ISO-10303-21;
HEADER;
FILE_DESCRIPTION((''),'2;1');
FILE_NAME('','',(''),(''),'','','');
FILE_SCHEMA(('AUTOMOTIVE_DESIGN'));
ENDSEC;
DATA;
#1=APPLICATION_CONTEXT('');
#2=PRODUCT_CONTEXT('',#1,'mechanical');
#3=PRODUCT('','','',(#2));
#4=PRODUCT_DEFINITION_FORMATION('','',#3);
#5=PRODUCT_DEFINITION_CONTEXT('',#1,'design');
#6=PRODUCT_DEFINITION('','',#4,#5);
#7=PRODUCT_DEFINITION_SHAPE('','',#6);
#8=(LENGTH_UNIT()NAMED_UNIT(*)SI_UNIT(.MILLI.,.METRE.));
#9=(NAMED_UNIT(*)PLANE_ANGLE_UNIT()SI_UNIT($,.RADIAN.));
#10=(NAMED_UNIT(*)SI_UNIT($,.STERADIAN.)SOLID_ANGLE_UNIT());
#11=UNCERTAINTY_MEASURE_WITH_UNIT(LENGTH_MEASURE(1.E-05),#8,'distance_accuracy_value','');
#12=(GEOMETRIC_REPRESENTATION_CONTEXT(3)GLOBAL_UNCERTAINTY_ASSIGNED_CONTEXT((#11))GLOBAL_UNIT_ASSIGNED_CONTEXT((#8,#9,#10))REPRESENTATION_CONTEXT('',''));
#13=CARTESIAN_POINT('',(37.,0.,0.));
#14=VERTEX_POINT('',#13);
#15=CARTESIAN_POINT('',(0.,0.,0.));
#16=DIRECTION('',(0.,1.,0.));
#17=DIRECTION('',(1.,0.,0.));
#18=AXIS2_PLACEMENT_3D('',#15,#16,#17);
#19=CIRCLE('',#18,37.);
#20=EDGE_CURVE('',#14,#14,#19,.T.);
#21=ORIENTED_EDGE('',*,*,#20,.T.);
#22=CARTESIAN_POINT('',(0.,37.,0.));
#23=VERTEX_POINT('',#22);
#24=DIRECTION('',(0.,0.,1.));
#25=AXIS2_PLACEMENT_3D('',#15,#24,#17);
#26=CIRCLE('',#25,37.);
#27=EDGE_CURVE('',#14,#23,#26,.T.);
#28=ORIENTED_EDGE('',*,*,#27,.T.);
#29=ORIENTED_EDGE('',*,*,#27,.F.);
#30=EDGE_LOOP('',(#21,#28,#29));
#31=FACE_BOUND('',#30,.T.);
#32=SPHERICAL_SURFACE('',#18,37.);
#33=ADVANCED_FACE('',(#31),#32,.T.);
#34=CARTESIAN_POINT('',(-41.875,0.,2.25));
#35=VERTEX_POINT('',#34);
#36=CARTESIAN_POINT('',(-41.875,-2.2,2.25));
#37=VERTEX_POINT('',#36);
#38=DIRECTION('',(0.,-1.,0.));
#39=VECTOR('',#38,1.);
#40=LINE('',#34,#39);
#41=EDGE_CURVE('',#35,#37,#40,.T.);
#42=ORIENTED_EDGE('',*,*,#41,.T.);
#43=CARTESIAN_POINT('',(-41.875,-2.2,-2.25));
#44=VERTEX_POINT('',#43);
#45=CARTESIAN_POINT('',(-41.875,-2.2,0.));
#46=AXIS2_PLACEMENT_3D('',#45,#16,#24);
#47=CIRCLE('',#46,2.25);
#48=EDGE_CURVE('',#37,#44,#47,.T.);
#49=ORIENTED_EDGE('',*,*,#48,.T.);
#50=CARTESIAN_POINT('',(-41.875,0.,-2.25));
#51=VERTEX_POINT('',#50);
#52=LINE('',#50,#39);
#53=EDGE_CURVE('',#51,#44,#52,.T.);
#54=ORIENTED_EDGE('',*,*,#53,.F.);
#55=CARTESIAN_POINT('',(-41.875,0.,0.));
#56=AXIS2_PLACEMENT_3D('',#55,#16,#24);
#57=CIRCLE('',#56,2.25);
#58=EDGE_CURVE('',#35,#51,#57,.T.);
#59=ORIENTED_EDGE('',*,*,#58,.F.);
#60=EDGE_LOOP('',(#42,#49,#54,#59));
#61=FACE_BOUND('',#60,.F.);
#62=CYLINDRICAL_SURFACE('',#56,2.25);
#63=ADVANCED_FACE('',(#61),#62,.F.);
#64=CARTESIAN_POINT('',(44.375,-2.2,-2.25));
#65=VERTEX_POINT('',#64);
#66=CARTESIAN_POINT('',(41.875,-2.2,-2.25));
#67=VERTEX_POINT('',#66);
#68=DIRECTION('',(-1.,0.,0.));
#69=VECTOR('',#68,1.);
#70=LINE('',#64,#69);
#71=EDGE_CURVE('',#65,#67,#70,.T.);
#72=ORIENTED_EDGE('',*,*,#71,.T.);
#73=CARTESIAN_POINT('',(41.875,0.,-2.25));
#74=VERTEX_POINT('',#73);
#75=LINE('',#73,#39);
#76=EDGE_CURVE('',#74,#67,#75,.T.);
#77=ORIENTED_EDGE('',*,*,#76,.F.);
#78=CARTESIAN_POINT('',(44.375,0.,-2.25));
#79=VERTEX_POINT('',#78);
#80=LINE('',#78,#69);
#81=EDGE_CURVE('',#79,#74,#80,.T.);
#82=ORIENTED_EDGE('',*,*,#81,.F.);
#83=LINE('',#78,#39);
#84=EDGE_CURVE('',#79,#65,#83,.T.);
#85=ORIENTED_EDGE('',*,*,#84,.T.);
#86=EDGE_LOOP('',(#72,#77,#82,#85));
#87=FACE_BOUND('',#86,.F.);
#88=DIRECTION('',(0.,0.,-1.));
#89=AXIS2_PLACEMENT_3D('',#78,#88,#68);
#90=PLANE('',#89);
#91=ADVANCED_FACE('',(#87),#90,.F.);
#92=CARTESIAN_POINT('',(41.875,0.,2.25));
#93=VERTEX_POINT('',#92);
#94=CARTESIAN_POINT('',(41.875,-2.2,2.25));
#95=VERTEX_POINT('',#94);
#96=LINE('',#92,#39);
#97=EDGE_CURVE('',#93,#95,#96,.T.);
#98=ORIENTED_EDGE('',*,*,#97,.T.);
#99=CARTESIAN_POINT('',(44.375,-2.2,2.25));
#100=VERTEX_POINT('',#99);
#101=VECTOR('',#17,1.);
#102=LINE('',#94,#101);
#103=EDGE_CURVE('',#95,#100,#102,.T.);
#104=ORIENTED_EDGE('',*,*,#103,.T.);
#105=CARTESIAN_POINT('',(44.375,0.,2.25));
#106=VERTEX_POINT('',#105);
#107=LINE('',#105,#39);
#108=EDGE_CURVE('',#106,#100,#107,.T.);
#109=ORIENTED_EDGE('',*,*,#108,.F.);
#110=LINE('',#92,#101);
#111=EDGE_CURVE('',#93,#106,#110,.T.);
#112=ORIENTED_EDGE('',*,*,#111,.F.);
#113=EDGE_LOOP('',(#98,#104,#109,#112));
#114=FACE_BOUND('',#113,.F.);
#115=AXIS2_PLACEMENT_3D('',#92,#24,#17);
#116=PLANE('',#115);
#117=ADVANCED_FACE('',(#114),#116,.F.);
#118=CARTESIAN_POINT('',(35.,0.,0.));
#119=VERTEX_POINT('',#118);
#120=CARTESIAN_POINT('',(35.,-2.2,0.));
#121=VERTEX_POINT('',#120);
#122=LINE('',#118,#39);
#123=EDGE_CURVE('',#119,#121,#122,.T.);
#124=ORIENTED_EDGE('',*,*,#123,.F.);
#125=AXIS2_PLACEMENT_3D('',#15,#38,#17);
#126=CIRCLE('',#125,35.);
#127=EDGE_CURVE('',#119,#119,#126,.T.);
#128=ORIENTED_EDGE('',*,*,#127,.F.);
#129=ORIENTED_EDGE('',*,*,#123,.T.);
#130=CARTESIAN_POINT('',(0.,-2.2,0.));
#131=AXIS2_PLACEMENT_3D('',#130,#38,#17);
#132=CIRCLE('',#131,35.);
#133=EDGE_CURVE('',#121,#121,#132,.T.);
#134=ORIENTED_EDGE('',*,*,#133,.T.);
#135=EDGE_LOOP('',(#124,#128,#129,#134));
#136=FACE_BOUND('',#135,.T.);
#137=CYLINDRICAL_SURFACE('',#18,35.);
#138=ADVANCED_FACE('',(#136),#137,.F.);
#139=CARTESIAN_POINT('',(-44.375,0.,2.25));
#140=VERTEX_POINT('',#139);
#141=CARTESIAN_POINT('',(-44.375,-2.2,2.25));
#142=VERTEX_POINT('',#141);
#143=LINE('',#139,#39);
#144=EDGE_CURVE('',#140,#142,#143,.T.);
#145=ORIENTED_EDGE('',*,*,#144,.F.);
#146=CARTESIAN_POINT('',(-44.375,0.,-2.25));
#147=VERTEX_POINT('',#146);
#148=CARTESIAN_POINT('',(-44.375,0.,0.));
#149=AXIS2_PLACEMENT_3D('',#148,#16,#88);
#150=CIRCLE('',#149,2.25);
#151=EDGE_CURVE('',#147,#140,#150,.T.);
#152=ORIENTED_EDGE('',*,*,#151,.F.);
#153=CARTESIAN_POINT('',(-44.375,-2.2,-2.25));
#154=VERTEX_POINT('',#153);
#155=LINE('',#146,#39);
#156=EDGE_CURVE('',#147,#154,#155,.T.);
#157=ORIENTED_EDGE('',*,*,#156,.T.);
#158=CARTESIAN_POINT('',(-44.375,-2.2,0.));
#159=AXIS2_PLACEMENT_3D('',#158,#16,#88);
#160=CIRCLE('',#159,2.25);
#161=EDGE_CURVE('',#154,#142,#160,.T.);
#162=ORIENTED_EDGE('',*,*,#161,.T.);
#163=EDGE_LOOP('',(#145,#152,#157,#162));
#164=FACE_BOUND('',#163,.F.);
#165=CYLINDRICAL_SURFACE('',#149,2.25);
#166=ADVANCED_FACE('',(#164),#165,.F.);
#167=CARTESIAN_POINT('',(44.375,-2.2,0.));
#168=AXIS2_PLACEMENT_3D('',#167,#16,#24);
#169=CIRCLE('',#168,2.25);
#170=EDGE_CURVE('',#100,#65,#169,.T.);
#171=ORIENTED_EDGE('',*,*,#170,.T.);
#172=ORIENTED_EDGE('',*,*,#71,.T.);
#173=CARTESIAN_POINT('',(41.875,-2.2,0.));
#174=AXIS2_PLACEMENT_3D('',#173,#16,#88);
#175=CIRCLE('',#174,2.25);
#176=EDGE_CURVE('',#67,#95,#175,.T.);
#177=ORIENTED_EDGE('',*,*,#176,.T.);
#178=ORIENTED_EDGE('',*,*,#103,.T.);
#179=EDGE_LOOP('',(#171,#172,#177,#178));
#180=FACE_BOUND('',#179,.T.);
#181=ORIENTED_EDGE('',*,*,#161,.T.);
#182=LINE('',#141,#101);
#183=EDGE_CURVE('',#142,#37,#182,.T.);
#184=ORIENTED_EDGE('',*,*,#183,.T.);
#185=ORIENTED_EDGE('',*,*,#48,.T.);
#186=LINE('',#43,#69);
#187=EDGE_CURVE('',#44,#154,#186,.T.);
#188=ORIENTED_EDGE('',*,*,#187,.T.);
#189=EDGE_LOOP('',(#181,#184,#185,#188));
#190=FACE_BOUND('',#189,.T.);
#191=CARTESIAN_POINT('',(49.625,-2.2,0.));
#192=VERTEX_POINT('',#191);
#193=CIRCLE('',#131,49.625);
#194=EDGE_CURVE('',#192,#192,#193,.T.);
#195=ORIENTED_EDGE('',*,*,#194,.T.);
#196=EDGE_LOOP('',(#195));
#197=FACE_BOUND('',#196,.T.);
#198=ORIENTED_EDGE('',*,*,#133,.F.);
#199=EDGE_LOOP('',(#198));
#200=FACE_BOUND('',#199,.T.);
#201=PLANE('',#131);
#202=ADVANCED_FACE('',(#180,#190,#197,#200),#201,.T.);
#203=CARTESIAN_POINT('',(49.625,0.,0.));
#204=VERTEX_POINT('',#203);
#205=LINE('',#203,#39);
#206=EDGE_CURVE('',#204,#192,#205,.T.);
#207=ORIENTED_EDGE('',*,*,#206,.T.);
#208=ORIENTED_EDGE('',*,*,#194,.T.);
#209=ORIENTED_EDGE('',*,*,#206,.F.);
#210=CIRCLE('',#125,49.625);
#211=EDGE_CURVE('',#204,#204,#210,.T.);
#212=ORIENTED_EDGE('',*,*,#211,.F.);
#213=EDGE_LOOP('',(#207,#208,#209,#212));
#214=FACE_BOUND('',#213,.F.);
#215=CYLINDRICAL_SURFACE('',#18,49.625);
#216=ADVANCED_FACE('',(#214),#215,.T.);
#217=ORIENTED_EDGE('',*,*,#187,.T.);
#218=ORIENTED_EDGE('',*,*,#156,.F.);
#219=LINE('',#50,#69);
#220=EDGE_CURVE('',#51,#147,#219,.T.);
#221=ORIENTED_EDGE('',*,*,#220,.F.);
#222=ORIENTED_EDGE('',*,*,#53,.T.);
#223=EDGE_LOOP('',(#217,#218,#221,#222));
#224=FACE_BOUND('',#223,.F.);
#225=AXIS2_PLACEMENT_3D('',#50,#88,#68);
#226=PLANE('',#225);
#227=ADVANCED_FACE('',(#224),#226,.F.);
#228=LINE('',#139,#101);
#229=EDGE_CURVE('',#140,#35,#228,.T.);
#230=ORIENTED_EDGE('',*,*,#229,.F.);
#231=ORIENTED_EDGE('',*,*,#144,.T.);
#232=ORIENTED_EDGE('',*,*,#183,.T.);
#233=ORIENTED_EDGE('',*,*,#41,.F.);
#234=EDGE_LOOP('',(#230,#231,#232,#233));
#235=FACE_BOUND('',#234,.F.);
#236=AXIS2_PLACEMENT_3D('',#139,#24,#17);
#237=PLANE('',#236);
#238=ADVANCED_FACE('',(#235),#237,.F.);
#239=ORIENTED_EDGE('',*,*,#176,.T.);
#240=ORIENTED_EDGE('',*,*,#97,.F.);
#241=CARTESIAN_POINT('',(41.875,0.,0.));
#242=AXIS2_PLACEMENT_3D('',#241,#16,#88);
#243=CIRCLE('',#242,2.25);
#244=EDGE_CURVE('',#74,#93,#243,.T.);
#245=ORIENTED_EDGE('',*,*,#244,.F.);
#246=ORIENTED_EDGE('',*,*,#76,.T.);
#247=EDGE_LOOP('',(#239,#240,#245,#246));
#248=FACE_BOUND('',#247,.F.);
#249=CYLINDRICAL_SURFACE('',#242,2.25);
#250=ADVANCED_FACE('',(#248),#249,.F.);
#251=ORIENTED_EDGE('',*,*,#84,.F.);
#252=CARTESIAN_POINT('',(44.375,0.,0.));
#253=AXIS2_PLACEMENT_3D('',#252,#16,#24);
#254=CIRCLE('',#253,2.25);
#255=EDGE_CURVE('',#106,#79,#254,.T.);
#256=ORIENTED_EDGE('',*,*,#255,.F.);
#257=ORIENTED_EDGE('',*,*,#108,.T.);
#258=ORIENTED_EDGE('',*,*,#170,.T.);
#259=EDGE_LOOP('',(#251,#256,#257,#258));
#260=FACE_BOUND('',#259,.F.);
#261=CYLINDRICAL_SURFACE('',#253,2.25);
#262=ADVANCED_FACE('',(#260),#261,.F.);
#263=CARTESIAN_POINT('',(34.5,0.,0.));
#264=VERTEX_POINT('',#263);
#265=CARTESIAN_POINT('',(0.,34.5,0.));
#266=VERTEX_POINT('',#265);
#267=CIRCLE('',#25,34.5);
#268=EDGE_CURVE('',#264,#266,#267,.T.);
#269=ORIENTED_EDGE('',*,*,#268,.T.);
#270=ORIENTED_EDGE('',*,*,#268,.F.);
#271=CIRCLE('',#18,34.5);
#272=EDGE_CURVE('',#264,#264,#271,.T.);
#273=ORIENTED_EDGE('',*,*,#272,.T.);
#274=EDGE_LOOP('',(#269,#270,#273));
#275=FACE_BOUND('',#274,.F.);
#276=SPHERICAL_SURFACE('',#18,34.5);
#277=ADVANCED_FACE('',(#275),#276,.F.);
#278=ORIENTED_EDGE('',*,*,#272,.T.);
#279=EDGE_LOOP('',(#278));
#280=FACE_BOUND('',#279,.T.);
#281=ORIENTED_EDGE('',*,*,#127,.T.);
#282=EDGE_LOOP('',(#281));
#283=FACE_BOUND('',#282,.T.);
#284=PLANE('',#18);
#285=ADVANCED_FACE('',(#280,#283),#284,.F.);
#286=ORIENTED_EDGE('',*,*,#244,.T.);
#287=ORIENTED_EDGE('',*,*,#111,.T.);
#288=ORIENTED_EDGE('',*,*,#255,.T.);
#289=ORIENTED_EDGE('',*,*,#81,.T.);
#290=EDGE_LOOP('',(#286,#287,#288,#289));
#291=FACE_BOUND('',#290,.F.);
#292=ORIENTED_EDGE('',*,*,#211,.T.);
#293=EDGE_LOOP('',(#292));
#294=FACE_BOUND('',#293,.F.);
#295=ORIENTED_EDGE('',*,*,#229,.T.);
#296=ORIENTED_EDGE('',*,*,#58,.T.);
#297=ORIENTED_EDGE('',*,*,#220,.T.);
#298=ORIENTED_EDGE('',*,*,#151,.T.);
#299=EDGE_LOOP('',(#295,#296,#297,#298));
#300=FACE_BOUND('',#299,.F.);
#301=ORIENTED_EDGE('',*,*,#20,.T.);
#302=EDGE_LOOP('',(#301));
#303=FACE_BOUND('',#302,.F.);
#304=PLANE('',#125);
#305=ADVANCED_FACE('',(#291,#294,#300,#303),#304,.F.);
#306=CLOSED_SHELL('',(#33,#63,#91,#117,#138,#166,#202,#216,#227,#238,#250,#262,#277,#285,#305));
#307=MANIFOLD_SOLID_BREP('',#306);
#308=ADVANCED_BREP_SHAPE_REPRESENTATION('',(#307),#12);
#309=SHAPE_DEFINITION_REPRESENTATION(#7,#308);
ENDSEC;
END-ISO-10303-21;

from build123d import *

# Parameters (mm, degrees)
F0_R     = 49.625
F0_R_2   = 35
F1_DEPTH = 2.2
F4_T     = 2.5


# Not quite as in the source:
# - a shell that OpenCascade refuses in one call is made with other operations: the cavity is built on its own and cut out
# - a feature names something its author has since deleted; it is built from what else it names


with BuildPart() as f1:
    # F0 (on Front) → F1 (new body)
    with BuildSketch(Plane.XZ):
        Circle(F0_R)
        with BuildLine():
            ThreePointArc((-44.375, -2.25), (-46.625, 0), (-44.375, 2.25))
            Line((-44.375, 2.25), (-41.875, 2.25))
            ThreePointArc((-41.875, 2.25), (-39.625, 0), (-41.875, -2.25))
            Line((-41.875, -2.25), (-44.375, -2.25))
        make_face(mode=Mode.SUBTRACT)
        Circle(F0_R_2, mode=Mode.SUBTRACT)
        with BuildLine():
            Line((44.375, -2.25), (41.875, -2.25))
            ThreePointArc((41.875, -2.25), (39.625, 0), (41.875, 2.25))
            Line((41.875, 2.25), (44.375, 2.25))
            ThreePointArc((44.375, 2.25), (46.625, 0), (44.375, -2.25))
        make_face(mode=Mode.SUBTRACT)
    extrude(amount=F1_DEPTH)

    # F2 (on Top) → F3 (revolve)
    with BuildSketch(Plane.XY):
        with BuildLine():
            Line((0, 0), (37, 0))
            ThreePointArc((37, 0), (26.1629509039, 26.1629509039), (0, 37))
            Line((0, 37), (0, 0))
        make_face()
    revolve(axis=Axis((0, 18.5, 0), (0, 1, 0)))

    # F4: shell of thickness 2.5, made by hand


with BuildPart() as f4_core1:
    # F4_t2: copy of F1
    add(f1.part)

    # the walls: a layer under each face that stays
    f4_faces = [f4_core1.faces().sort_by_distance(p)[0] for p in [
        (-49.625, -1.1, 0),
        (-33.0833333333, 0, -33.0833333333),
        (-33.0833333333, -2.2, -33.0833333333),
        (-46.625, -1.1, 0),
        (-43.125, -1.1, -2.25),
        (-43.125, -1.1, 2.25),
        (-39.625, -1.1, 0),
        (-26.1629509039, 26.1629509039, 0),
        (43.125, -1.1, -2.25),
        (46.625, -1.1, 0),
        (39.625, -1.1, 0),
        (43.125, -1.1, 2.25),
        (-35, -1.1, 0),
    ]]
    thicken(f4_faces, amount=-F4_T, mode=Mode.SUBTRACT)

    # F4_s3 → F4_t4 (revolve, cut)
    with BuildSketch(Plane.XY):
        Polygon((37.025, 0.025), (37, -2.5), (34.5, -2.5), (34.5, 0), align=None)
    revolve(axis=Axis((0, 0, 0), (0, 1, 0)), mode=Mode.SUBTRACT)


with BuildPart() as f1_1:
    add(f1.part)

    # what is left inside the walls is the cavity
    f4_cavity = [f4_core1.part.solids().sort_by_distance(p)[0] for p in [
        (-29.856226, 17.2375, 0),
    ]]
    add(f4_cavity, mode=Mode.SUBTRACT)


solid = f1_1.part
